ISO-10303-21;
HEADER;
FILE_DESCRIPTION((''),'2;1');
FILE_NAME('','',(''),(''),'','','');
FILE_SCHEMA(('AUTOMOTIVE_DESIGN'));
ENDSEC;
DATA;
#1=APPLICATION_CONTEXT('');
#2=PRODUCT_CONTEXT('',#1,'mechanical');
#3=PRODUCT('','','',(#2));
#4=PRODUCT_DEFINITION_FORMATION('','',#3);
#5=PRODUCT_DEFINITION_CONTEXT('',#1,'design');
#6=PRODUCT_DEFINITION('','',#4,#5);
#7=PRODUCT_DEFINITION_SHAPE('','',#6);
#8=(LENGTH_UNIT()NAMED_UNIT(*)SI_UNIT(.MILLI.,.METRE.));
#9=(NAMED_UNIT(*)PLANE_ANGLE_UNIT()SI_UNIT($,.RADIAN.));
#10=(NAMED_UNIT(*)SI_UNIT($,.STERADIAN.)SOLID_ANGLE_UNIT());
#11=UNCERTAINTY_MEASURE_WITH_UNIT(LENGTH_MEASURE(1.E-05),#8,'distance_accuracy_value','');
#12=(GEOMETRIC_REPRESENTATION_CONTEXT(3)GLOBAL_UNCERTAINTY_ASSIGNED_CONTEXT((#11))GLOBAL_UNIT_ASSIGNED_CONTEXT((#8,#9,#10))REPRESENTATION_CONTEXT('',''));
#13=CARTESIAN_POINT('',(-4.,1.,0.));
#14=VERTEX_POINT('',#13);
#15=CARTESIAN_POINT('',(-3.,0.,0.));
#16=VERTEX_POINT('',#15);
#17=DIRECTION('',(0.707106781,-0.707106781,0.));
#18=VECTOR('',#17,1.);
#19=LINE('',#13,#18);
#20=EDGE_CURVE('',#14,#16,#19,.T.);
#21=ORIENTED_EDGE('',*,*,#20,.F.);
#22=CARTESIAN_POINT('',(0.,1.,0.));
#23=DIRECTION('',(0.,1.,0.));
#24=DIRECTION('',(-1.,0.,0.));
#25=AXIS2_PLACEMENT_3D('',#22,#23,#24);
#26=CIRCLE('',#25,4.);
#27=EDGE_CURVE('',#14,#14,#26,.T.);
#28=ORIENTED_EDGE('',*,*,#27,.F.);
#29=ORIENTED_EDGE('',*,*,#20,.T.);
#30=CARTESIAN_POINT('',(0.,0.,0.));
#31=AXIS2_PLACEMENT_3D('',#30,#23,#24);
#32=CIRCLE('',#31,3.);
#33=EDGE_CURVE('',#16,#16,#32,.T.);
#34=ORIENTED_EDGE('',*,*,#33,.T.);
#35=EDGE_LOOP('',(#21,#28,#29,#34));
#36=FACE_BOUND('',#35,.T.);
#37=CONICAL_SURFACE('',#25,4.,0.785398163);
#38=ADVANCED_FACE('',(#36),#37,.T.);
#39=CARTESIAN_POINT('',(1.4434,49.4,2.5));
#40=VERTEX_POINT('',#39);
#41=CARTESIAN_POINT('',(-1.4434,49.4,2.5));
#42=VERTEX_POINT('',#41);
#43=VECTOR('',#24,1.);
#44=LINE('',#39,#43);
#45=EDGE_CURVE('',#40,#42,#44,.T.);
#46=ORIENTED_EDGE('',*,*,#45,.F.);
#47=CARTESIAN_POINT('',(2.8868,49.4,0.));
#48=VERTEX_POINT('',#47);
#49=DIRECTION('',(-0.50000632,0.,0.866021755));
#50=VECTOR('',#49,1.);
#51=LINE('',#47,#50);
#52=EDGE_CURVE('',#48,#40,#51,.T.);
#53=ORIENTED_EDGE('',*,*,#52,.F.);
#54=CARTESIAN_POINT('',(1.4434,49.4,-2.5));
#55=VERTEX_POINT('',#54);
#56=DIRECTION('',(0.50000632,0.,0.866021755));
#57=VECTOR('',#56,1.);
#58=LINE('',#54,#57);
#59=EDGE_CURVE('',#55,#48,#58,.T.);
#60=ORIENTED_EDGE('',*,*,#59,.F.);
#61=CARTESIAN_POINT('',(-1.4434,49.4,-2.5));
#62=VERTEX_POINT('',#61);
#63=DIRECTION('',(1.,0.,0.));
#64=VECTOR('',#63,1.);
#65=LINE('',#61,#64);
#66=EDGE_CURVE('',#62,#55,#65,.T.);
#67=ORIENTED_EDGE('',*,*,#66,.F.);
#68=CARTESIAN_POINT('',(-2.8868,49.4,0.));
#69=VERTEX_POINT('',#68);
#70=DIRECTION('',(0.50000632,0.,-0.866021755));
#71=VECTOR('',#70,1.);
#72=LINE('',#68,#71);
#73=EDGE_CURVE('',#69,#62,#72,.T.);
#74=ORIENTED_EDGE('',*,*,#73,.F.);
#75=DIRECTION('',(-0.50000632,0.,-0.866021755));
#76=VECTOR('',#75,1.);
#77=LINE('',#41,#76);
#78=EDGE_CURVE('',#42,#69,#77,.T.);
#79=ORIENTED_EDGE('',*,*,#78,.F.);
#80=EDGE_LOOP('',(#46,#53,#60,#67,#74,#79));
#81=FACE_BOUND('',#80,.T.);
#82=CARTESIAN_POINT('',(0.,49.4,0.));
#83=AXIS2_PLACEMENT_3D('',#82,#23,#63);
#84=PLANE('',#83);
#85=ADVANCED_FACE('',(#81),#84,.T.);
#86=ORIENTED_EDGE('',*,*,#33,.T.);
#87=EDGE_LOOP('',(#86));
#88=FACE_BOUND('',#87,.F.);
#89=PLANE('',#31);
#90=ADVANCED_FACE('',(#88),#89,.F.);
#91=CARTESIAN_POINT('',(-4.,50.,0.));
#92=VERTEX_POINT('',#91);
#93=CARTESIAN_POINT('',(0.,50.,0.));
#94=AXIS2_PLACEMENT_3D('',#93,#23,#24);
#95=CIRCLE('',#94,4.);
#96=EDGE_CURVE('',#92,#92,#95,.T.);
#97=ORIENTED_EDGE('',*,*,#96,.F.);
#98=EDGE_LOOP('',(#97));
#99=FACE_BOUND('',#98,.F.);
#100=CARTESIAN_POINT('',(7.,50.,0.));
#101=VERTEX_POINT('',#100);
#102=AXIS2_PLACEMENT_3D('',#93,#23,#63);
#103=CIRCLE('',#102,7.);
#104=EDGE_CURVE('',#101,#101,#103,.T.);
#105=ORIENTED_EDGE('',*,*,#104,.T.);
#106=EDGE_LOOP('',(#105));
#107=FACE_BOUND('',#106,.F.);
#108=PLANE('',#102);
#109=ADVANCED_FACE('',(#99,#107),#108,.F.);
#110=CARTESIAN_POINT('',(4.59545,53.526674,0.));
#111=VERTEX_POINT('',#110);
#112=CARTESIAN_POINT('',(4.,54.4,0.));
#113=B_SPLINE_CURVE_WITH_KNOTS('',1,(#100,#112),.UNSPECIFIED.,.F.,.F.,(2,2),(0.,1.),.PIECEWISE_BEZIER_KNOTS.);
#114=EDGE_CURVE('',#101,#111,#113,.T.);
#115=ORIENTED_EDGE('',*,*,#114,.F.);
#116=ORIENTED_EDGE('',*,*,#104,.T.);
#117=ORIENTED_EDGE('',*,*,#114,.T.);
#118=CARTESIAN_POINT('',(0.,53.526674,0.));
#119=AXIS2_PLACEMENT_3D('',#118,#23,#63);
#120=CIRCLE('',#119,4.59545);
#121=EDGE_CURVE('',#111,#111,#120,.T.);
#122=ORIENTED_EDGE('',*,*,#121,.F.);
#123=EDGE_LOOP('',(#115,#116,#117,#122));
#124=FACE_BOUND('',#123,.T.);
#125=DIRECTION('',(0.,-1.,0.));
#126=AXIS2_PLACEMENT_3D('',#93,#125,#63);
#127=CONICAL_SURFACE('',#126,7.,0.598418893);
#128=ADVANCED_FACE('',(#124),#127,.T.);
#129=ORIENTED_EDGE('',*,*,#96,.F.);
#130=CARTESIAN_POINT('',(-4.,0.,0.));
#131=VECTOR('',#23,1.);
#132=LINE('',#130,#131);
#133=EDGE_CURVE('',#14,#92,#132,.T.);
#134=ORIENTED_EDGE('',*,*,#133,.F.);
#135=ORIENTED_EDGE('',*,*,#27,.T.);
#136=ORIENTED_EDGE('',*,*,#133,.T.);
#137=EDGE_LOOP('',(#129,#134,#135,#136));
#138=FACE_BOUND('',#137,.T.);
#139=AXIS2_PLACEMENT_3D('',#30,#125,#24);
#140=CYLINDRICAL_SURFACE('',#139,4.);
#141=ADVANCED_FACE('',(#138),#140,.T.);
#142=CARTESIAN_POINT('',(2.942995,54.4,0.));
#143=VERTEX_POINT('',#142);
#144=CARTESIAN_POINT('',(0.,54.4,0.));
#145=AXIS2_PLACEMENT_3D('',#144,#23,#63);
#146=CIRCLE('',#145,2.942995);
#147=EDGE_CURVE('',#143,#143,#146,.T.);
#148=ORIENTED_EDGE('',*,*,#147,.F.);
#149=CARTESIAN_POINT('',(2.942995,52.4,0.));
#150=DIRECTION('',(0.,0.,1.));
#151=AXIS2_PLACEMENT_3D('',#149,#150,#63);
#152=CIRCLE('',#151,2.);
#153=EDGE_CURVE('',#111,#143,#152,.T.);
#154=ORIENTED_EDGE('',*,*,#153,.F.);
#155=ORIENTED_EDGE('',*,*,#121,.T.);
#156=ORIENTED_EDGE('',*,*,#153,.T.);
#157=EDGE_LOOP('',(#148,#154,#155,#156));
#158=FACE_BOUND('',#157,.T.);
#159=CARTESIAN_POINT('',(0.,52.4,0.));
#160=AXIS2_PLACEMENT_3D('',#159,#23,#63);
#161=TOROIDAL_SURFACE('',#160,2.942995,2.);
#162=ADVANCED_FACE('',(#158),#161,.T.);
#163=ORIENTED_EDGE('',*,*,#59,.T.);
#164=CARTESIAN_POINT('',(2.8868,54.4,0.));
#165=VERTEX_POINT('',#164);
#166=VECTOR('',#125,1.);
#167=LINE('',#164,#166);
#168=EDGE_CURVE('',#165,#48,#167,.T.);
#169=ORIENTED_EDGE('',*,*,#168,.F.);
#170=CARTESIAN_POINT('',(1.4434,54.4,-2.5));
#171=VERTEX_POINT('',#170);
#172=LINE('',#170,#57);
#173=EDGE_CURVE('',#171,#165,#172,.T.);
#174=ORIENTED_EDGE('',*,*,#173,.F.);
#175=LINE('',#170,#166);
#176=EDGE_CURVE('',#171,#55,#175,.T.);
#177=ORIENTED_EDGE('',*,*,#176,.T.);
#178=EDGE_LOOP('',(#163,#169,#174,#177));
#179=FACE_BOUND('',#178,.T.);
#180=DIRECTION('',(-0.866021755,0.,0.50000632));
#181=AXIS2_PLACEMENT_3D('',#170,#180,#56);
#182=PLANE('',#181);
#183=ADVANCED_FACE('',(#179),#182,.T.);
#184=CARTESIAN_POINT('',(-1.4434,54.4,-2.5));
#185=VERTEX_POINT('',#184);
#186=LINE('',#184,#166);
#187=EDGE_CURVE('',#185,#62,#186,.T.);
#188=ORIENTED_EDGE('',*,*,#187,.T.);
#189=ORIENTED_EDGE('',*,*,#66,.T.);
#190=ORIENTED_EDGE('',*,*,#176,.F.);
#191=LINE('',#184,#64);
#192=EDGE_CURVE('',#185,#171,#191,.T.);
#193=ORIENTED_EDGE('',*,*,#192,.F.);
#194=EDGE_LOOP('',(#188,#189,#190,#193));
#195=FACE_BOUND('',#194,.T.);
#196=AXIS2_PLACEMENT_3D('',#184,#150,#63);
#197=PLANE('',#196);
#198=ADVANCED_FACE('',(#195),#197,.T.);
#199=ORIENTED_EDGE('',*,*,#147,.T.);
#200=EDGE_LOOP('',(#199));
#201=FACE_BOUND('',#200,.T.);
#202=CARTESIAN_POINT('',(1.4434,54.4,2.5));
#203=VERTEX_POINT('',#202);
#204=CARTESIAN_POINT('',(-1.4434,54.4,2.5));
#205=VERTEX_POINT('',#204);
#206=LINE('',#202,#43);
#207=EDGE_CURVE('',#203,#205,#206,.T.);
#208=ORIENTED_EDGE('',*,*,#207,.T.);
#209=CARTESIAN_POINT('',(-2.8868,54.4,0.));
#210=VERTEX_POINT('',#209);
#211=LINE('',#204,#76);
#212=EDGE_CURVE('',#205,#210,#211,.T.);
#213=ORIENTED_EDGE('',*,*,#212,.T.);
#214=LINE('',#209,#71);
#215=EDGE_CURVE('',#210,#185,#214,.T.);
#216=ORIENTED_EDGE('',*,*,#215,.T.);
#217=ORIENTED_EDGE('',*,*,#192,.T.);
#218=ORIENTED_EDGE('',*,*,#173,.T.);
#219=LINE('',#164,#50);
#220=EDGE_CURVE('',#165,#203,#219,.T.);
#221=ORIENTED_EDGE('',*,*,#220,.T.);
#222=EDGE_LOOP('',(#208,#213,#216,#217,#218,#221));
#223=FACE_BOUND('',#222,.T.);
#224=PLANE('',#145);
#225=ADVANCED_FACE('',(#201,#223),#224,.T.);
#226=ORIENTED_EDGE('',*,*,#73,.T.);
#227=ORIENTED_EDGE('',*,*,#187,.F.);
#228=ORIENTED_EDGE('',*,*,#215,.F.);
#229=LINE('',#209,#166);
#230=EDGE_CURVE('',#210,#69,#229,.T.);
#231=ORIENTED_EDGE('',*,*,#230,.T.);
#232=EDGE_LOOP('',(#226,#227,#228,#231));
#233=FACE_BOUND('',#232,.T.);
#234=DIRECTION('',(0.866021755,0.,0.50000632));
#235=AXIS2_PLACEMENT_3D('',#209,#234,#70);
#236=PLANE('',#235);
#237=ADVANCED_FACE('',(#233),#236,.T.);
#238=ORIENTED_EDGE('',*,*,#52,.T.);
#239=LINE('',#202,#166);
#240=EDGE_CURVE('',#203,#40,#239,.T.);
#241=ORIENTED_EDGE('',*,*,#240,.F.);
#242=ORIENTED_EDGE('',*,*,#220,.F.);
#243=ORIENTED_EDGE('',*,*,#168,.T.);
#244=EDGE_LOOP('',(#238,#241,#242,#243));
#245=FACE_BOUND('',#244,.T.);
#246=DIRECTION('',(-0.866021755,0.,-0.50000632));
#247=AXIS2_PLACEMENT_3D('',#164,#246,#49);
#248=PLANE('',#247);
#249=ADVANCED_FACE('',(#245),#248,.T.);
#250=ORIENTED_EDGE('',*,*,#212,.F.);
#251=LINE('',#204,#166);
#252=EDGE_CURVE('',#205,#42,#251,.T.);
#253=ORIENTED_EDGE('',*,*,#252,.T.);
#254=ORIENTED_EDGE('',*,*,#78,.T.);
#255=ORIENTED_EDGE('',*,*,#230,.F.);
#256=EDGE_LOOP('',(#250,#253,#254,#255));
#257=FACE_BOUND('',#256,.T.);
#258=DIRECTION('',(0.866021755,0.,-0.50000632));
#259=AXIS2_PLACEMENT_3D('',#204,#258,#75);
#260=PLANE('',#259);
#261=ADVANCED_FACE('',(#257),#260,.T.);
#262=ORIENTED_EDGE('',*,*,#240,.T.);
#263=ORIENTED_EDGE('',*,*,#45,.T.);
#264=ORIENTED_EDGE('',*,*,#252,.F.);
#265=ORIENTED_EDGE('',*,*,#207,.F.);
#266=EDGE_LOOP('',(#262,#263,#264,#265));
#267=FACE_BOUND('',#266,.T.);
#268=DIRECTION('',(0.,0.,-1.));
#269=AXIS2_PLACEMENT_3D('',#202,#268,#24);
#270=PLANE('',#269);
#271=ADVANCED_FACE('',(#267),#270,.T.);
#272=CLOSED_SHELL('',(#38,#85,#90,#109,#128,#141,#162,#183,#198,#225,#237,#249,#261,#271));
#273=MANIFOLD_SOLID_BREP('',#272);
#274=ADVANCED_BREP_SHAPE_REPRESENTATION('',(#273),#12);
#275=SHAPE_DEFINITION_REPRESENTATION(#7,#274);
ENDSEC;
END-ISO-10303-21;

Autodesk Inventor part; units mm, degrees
ref_plane "YZ Plane" through (0, 0, 0) normal (1, 0, 0) x (0, 1, 0)
ref_plane "XZ Plane" through (0, 0, 0) normal (0, 1, 0) x (-1, 0, 0)
sketch "Sketch1" plane through (0, 0, 0) normal (0, 1, 0) x (-1, 0, 0)
  circle A0 centre (0, 0) radius 4
  dimension "d0" = 8
extrude "Extrusion1" add sketch "Sketch1" along normal blind 50
chamfer "Chamfer1" distance 1 angle 45 1 edges at (4, 0, 0)
ref_plane "Work Plane1" through (0, 54.4, 0) normal (0, 1, 0) x (1, 0, 0)
thread "Thread1" size "M8x1.25" class "6g" standard "ANSI Metric M Profile" full length
sketch "Sketch5" plane through (0, 50, 0) normal (0, 1, 0) x (1, 0, 0)
  circle A0 centre (0, 0) radius 7
  dimension "d17" = 14
sketch "Sketch6" plane through (0, 54.4, 0) normal (0, 1, 0) x (1, 0, 0)
  circle A0 centre (0, 0) radius 4
  dimension "d18" = 8
loft "Loft2" add profiles "Sketch5", "Sketch6"
fillet "Fillet1" radius 2 1 edges at (-4, 54.4, 0)
sketch "Sketch7" plane through (0, 54.4, 0) normal (0, 1, 0) x (1, 0, 0)
  line L0 (2.8868, 0) -> (1.4434, -2.5)
  line L1 (1.4434, -2.5) -> (-1.4434, -2.5)
  line L2 (-1.4434, -2.5) -> (-2.8868, 0)
  line L3 (-2.8868, 0) -> (-1.4434, 2.5)
  line L4 (-1.4434, 2.5) -> (1.4434, 2.5)
  line L5 (1.4434, 2.5) -> (2.8868, 0)
  point P0 (0, 0)
  point P1 (0, 0)
  dimension "d24" = 5
extrude "Extrusion3" cut sketch "Sketch7" against normal blind 5
properties part number "M8x50"
